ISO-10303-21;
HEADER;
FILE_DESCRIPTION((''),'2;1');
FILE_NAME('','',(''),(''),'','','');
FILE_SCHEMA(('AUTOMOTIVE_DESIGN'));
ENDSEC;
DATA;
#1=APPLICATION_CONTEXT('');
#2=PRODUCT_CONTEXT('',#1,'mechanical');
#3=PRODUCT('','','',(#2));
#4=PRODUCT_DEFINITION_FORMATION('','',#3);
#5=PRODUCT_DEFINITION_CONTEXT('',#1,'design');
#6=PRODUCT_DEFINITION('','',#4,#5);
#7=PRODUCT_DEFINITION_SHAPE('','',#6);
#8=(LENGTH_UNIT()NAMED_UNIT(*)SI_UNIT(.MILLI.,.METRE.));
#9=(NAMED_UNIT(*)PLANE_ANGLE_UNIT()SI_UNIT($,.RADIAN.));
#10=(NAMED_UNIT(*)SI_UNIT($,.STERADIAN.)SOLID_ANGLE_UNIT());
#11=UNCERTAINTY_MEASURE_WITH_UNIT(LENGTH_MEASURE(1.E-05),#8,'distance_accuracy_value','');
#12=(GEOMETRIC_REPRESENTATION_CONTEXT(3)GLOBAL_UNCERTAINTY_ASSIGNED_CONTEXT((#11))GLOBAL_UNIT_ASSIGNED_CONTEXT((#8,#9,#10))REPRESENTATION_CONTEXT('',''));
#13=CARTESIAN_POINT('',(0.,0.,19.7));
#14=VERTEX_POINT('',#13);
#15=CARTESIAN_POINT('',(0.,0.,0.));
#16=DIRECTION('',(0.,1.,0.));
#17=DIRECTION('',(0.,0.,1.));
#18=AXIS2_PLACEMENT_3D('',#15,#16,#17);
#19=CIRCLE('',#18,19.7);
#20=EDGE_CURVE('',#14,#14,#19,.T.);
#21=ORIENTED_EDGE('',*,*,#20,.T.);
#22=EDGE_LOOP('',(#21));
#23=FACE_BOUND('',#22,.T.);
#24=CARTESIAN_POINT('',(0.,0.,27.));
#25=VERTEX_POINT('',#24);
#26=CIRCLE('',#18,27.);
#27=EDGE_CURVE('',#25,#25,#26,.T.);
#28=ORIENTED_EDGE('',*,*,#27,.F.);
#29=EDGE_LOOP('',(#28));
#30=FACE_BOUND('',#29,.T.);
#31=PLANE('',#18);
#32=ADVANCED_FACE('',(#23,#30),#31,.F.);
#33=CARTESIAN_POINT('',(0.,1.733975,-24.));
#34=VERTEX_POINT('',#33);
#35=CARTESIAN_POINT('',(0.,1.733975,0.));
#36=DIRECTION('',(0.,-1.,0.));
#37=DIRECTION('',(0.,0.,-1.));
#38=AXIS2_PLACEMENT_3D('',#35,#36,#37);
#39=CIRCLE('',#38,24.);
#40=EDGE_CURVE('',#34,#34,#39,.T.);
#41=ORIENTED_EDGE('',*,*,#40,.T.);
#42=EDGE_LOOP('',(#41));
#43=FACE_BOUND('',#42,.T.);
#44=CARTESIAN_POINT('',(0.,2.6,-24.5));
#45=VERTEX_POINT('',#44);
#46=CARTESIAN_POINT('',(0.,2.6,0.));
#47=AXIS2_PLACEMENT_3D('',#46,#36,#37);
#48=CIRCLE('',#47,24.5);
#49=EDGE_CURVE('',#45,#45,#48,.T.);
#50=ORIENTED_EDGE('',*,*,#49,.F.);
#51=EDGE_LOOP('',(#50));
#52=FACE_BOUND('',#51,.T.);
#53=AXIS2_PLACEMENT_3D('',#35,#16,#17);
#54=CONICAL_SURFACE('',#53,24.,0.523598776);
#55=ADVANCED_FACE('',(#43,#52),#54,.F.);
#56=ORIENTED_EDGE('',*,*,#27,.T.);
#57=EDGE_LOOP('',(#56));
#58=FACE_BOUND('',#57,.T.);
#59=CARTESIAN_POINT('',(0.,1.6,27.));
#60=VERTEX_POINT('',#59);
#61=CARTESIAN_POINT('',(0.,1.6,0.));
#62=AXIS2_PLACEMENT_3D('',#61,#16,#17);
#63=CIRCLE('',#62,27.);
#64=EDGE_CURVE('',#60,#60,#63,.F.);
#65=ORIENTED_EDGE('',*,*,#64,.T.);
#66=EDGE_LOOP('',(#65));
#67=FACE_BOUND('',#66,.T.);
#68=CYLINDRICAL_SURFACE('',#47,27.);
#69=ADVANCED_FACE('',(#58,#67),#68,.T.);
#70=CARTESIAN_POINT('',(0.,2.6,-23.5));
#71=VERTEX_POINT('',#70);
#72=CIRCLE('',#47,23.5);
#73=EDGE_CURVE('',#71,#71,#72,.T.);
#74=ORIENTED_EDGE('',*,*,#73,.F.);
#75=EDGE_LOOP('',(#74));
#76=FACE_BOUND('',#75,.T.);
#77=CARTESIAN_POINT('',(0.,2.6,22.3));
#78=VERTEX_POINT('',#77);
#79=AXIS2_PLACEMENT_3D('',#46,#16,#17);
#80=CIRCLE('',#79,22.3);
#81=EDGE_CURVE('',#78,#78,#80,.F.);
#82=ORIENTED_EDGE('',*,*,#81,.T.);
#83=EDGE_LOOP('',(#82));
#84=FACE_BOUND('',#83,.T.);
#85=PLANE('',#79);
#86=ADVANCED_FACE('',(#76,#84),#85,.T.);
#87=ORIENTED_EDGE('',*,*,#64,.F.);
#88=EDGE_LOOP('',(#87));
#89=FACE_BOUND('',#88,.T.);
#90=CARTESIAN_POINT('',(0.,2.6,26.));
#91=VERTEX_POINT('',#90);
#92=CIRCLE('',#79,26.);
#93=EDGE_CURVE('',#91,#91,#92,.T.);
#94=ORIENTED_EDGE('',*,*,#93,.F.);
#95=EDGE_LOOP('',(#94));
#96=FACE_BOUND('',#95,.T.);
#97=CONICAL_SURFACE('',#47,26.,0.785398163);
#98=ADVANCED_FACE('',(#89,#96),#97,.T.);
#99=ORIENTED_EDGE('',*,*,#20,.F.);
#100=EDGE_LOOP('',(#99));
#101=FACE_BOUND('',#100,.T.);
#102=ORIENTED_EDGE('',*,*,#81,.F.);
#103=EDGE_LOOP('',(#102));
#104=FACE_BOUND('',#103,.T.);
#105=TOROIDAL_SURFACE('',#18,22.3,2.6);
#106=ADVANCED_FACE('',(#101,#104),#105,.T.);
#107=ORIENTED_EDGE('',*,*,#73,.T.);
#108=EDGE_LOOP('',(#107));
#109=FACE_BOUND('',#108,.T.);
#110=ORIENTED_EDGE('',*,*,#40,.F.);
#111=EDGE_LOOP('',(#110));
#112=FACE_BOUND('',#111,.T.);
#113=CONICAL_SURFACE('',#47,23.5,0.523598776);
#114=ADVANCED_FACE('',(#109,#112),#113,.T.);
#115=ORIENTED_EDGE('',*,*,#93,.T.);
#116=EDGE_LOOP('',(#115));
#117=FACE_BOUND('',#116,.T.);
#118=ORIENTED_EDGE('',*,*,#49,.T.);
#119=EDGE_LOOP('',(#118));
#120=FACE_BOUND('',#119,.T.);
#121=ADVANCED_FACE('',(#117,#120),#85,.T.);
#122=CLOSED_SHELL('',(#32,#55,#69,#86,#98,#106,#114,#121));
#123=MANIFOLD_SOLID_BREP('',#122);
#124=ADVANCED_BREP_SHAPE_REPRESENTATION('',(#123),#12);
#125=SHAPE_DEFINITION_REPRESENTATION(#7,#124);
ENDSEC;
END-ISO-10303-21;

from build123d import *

# Parameters (mm, degrees)
SKETCH1_R           = 27
SKETCH1_R_2         = 19.7
BOSS_EXTRUDE1_DEPTH = 2.6
FILLET1_R           = 2.6
CHAMFER1_SIZE       = 1


with BuildPart() as part:
    # Sketch1 → Boss-Extrude1 (new body)
    with BuildSketch(Plane(origin=(0, 0, 0), x_dir=(1, 0, 0), z_dir=(0, 1, 0))):
        with Locations(Location((0, 0, 0), (0, 0, 270))):
            Circle(SKETCH1_R)
        with Locations(Location((0, 0, 0), (0, 0, 270))):
            Circle(SKETCH1_R_2, mode=Mode.SUBTRACT)
    extrude(amount=BOSS_EXTRUDE1_DEPTH)

    # Fillet1
    fillet1_edges = [part.edges().sort_by_distance(p)[0] for p in [
        (0, 2.6, -19.7),
    ]]
    fillet(fillet1_edges, radius=FILLET1_R - 0.0001)  # a hair under: the kernel refuses the full size

    # Chamfer1
    chamfer1_edges = [part.edges().sort_by_distance(p)[0] for p in [
        (0, 2.6, -27),
    ]]
    chamfer(chamfer1_edges, length=CHAMFER1_SIZE)

    # Cut-Sweep1: sweep along a curve in space
    with BuildLine() as cut_sweep1_path:
        ThreePointArc((0, 0, 19.7), (13.930003589, 0, 13.930003589), (19.7, 0, 0))
        ThreePointArc((19.7, 0, 0), (13.930003589, 0, -13.930003589), (0, 0, -19.7))
        ThreePointArc((0, 0, -19.7), (-13.930003589, 0, -13.930003589), (-19.7, 0, 0))
        ThreePointArc((-19.7, 0, 0), (-13.930003589, 0, 13.930003589), (0, 0, 19.7))
    # Sketch2 → Cut-Sweep1 (sweep, cut)
    with BuildSketch(Plane(origin=(0, 0, 0), x_dir=(0, 0, -1), z_dir=(1, 0, 0))):
        Polygon((24.5, 2.6), (24, 1.733974596), (23.5, 2.6), align=None)
    sweep(path=cut_sweep1_path.line, mode=Mode.SUBTRACT)


solid = part.part
